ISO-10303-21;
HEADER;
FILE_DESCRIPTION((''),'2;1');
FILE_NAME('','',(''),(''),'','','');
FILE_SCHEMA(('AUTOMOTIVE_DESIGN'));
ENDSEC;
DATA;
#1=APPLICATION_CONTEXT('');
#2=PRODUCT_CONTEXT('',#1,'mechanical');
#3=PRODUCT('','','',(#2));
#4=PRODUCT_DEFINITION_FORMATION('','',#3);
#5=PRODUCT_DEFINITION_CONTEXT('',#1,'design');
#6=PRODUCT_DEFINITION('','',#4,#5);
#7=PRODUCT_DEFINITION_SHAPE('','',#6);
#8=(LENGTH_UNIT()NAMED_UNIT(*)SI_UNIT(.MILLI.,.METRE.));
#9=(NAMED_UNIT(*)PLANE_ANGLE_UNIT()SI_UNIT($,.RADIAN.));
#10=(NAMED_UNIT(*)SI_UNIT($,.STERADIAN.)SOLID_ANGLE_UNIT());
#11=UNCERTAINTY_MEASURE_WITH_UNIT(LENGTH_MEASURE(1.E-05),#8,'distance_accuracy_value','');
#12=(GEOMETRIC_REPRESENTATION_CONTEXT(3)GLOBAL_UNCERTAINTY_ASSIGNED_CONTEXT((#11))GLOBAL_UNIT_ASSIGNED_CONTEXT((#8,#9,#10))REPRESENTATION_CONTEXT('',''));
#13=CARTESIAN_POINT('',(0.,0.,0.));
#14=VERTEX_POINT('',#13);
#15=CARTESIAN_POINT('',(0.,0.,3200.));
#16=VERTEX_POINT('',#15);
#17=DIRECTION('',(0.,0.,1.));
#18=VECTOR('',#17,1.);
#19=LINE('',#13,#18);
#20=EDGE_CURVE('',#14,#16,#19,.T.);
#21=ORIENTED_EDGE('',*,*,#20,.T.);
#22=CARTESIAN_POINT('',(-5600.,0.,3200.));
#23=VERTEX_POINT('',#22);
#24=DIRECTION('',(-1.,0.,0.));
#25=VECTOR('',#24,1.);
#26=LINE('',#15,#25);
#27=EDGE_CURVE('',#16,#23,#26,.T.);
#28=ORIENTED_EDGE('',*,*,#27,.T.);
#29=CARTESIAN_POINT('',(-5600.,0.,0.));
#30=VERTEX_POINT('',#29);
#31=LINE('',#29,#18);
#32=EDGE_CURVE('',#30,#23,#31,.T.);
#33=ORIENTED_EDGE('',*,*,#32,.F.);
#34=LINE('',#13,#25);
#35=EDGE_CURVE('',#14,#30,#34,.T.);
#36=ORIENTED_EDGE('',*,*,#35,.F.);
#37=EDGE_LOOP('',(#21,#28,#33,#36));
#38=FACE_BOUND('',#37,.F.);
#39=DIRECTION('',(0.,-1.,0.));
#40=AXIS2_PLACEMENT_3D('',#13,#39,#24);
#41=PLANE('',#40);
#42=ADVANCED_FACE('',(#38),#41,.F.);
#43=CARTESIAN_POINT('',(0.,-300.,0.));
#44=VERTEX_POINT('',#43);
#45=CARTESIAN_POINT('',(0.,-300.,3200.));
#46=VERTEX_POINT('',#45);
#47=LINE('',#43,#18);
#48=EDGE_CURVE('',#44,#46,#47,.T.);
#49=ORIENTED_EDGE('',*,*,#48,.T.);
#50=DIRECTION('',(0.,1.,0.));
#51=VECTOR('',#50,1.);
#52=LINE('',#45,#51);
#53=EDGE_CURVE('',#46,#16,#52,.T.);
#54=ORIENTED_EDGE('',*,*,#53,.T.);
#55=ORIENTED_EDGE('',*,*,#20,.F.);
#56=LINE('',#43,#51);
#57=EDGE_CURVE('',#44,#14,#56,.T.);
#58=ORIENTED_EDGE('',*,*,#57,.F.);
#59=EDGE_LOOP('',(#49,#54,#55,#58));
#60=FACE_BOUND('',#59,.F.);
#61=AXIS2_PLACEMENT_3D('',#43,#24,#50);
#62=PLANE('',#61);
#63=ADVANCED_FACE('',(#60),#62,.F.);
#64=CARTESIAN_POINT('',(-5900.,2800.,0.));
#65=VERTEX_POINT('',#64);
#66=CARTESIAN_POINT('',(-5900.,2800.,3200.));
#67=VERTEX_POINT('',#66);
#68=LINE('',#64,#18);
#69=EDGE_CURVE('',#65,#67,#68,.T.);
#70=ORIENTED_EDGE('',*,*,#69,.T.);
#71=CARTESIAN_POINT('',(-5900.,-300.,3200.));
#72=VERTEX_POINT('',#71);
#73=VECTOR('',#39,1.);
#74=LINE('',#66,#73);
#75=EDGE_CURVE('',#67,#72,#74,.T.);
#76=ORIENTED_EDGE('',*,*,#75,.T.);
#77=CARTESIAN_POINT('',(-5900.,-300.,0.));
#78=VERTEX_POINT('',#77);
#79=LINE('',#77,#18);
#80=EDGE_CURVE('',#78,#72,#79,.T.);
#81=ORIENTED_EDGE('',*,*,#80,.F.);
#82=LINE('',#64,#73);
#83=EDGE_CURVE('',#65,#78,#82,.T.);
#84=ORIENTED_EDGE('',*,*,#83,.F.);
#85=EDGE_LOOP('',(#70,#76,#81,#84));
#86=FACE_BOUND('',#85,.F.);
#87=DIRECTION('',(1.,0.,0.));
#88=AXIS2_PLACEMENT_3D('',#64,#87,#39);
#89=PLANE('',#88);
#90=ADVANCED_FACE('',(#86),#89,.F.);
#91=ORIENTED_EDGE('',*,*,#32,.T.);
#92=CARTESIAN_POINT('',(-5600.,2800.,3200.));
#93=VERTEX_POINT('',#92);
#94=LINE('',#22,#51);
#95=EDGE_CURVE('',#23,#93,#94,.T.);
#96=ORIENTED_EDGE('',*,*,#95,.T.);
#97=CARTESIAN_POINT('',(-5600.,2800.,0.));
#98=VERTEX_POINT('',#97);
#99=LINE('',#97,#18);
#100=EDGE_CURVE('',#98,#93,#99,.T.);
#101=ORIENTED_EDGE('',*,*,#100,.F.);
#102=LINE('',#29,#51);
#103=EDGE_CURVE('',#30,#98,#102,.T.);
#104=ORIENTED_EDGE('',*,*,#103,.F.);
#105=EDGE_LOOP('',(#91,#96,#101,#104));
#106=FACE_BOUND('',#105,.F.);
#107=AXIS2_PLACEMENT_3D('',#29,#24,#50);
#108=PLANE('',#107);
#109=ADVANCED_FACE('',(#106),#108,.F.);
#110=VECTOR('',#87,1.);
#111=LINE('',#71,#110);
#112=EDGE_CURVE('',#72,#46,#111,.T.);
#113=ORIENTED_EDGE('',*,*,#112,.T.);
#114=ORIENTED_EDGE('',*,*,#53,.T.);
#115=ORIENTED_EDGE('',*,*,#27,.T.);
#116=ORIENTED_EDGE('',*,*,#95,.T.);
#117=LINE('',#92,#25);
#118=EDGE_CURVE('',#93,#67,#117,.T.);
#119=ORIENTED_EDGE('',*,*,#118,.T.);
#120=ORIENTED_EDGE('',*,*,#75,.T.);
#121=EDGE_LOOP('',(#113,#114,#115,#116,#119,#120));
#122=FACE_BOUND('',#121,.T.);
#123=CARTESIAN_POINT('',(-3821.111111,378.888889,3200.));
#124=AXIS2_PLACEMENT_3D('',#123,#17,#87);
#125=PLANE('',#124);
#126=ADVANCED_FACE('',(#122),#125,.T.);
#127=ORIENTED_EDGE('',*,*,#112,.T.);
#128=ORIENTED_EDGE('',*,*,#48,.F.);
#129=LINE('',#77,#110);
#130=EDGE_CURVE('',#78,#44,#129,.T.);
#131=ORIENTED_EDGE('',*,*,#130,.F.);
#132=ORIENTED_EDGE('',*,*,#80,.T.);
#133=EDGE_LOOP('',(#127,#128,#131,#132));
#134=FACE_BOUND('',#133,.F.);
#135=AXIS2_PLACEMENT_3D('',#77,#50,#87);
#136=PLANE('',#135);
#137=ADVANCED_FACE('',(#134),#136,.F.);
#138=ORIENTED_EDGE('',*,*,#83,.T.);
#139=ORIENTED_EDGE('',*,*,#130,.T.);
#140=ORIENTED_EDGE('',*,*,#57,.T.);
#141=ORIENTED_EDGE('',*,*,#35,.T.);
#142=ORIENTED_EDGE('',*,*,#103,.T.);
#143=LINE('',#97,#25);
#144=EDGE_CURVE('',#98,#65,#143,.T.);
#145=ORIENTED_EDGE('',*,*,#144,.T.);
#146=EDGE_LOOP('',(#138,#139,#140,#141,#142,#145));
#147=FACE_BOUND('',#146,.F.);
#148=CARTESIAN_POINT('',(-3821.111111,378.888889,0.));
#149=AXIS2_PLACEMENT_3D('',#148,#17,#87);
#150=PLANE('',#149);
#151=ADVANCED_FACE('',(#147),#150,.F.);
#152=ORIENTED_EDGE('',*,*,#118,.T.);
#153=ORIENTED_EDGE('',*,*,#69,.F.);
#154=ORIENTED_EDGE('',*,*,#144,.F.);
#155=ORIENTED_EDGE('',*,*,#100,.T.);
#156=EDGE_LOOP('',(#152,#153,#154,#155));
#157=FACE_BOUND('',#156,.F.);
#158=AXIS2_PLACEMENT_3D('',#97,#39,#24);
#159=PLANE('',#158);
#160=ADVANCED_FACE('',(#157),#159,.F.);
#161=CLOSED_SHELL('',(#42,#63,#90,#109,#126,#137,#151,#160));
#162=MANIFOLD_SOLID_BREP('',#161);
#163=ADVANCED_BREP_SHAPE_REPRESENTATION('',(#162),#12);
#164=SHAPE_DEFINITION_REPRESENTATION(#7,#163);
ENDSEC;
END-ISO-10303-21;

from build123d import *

# Parameters (mm, degrees)
F1_DEPTH = 3200


# Not quite as in the source:
# - a feature of the source that left no trace in its solid (it failed there, or was rolled back) is left out


with BuildPart() as f1:
    # F0 (on Top) → F1 (new body)
    with BuildSketch(Plane.XY):
        Polygon((0, -300), (0, 0), (-5600, 0), (-5600, 2800), (-5900, 2800), (-5900, -300), align=None)
    extrude(amount=F1_DEPTH)


solid = f1.part
